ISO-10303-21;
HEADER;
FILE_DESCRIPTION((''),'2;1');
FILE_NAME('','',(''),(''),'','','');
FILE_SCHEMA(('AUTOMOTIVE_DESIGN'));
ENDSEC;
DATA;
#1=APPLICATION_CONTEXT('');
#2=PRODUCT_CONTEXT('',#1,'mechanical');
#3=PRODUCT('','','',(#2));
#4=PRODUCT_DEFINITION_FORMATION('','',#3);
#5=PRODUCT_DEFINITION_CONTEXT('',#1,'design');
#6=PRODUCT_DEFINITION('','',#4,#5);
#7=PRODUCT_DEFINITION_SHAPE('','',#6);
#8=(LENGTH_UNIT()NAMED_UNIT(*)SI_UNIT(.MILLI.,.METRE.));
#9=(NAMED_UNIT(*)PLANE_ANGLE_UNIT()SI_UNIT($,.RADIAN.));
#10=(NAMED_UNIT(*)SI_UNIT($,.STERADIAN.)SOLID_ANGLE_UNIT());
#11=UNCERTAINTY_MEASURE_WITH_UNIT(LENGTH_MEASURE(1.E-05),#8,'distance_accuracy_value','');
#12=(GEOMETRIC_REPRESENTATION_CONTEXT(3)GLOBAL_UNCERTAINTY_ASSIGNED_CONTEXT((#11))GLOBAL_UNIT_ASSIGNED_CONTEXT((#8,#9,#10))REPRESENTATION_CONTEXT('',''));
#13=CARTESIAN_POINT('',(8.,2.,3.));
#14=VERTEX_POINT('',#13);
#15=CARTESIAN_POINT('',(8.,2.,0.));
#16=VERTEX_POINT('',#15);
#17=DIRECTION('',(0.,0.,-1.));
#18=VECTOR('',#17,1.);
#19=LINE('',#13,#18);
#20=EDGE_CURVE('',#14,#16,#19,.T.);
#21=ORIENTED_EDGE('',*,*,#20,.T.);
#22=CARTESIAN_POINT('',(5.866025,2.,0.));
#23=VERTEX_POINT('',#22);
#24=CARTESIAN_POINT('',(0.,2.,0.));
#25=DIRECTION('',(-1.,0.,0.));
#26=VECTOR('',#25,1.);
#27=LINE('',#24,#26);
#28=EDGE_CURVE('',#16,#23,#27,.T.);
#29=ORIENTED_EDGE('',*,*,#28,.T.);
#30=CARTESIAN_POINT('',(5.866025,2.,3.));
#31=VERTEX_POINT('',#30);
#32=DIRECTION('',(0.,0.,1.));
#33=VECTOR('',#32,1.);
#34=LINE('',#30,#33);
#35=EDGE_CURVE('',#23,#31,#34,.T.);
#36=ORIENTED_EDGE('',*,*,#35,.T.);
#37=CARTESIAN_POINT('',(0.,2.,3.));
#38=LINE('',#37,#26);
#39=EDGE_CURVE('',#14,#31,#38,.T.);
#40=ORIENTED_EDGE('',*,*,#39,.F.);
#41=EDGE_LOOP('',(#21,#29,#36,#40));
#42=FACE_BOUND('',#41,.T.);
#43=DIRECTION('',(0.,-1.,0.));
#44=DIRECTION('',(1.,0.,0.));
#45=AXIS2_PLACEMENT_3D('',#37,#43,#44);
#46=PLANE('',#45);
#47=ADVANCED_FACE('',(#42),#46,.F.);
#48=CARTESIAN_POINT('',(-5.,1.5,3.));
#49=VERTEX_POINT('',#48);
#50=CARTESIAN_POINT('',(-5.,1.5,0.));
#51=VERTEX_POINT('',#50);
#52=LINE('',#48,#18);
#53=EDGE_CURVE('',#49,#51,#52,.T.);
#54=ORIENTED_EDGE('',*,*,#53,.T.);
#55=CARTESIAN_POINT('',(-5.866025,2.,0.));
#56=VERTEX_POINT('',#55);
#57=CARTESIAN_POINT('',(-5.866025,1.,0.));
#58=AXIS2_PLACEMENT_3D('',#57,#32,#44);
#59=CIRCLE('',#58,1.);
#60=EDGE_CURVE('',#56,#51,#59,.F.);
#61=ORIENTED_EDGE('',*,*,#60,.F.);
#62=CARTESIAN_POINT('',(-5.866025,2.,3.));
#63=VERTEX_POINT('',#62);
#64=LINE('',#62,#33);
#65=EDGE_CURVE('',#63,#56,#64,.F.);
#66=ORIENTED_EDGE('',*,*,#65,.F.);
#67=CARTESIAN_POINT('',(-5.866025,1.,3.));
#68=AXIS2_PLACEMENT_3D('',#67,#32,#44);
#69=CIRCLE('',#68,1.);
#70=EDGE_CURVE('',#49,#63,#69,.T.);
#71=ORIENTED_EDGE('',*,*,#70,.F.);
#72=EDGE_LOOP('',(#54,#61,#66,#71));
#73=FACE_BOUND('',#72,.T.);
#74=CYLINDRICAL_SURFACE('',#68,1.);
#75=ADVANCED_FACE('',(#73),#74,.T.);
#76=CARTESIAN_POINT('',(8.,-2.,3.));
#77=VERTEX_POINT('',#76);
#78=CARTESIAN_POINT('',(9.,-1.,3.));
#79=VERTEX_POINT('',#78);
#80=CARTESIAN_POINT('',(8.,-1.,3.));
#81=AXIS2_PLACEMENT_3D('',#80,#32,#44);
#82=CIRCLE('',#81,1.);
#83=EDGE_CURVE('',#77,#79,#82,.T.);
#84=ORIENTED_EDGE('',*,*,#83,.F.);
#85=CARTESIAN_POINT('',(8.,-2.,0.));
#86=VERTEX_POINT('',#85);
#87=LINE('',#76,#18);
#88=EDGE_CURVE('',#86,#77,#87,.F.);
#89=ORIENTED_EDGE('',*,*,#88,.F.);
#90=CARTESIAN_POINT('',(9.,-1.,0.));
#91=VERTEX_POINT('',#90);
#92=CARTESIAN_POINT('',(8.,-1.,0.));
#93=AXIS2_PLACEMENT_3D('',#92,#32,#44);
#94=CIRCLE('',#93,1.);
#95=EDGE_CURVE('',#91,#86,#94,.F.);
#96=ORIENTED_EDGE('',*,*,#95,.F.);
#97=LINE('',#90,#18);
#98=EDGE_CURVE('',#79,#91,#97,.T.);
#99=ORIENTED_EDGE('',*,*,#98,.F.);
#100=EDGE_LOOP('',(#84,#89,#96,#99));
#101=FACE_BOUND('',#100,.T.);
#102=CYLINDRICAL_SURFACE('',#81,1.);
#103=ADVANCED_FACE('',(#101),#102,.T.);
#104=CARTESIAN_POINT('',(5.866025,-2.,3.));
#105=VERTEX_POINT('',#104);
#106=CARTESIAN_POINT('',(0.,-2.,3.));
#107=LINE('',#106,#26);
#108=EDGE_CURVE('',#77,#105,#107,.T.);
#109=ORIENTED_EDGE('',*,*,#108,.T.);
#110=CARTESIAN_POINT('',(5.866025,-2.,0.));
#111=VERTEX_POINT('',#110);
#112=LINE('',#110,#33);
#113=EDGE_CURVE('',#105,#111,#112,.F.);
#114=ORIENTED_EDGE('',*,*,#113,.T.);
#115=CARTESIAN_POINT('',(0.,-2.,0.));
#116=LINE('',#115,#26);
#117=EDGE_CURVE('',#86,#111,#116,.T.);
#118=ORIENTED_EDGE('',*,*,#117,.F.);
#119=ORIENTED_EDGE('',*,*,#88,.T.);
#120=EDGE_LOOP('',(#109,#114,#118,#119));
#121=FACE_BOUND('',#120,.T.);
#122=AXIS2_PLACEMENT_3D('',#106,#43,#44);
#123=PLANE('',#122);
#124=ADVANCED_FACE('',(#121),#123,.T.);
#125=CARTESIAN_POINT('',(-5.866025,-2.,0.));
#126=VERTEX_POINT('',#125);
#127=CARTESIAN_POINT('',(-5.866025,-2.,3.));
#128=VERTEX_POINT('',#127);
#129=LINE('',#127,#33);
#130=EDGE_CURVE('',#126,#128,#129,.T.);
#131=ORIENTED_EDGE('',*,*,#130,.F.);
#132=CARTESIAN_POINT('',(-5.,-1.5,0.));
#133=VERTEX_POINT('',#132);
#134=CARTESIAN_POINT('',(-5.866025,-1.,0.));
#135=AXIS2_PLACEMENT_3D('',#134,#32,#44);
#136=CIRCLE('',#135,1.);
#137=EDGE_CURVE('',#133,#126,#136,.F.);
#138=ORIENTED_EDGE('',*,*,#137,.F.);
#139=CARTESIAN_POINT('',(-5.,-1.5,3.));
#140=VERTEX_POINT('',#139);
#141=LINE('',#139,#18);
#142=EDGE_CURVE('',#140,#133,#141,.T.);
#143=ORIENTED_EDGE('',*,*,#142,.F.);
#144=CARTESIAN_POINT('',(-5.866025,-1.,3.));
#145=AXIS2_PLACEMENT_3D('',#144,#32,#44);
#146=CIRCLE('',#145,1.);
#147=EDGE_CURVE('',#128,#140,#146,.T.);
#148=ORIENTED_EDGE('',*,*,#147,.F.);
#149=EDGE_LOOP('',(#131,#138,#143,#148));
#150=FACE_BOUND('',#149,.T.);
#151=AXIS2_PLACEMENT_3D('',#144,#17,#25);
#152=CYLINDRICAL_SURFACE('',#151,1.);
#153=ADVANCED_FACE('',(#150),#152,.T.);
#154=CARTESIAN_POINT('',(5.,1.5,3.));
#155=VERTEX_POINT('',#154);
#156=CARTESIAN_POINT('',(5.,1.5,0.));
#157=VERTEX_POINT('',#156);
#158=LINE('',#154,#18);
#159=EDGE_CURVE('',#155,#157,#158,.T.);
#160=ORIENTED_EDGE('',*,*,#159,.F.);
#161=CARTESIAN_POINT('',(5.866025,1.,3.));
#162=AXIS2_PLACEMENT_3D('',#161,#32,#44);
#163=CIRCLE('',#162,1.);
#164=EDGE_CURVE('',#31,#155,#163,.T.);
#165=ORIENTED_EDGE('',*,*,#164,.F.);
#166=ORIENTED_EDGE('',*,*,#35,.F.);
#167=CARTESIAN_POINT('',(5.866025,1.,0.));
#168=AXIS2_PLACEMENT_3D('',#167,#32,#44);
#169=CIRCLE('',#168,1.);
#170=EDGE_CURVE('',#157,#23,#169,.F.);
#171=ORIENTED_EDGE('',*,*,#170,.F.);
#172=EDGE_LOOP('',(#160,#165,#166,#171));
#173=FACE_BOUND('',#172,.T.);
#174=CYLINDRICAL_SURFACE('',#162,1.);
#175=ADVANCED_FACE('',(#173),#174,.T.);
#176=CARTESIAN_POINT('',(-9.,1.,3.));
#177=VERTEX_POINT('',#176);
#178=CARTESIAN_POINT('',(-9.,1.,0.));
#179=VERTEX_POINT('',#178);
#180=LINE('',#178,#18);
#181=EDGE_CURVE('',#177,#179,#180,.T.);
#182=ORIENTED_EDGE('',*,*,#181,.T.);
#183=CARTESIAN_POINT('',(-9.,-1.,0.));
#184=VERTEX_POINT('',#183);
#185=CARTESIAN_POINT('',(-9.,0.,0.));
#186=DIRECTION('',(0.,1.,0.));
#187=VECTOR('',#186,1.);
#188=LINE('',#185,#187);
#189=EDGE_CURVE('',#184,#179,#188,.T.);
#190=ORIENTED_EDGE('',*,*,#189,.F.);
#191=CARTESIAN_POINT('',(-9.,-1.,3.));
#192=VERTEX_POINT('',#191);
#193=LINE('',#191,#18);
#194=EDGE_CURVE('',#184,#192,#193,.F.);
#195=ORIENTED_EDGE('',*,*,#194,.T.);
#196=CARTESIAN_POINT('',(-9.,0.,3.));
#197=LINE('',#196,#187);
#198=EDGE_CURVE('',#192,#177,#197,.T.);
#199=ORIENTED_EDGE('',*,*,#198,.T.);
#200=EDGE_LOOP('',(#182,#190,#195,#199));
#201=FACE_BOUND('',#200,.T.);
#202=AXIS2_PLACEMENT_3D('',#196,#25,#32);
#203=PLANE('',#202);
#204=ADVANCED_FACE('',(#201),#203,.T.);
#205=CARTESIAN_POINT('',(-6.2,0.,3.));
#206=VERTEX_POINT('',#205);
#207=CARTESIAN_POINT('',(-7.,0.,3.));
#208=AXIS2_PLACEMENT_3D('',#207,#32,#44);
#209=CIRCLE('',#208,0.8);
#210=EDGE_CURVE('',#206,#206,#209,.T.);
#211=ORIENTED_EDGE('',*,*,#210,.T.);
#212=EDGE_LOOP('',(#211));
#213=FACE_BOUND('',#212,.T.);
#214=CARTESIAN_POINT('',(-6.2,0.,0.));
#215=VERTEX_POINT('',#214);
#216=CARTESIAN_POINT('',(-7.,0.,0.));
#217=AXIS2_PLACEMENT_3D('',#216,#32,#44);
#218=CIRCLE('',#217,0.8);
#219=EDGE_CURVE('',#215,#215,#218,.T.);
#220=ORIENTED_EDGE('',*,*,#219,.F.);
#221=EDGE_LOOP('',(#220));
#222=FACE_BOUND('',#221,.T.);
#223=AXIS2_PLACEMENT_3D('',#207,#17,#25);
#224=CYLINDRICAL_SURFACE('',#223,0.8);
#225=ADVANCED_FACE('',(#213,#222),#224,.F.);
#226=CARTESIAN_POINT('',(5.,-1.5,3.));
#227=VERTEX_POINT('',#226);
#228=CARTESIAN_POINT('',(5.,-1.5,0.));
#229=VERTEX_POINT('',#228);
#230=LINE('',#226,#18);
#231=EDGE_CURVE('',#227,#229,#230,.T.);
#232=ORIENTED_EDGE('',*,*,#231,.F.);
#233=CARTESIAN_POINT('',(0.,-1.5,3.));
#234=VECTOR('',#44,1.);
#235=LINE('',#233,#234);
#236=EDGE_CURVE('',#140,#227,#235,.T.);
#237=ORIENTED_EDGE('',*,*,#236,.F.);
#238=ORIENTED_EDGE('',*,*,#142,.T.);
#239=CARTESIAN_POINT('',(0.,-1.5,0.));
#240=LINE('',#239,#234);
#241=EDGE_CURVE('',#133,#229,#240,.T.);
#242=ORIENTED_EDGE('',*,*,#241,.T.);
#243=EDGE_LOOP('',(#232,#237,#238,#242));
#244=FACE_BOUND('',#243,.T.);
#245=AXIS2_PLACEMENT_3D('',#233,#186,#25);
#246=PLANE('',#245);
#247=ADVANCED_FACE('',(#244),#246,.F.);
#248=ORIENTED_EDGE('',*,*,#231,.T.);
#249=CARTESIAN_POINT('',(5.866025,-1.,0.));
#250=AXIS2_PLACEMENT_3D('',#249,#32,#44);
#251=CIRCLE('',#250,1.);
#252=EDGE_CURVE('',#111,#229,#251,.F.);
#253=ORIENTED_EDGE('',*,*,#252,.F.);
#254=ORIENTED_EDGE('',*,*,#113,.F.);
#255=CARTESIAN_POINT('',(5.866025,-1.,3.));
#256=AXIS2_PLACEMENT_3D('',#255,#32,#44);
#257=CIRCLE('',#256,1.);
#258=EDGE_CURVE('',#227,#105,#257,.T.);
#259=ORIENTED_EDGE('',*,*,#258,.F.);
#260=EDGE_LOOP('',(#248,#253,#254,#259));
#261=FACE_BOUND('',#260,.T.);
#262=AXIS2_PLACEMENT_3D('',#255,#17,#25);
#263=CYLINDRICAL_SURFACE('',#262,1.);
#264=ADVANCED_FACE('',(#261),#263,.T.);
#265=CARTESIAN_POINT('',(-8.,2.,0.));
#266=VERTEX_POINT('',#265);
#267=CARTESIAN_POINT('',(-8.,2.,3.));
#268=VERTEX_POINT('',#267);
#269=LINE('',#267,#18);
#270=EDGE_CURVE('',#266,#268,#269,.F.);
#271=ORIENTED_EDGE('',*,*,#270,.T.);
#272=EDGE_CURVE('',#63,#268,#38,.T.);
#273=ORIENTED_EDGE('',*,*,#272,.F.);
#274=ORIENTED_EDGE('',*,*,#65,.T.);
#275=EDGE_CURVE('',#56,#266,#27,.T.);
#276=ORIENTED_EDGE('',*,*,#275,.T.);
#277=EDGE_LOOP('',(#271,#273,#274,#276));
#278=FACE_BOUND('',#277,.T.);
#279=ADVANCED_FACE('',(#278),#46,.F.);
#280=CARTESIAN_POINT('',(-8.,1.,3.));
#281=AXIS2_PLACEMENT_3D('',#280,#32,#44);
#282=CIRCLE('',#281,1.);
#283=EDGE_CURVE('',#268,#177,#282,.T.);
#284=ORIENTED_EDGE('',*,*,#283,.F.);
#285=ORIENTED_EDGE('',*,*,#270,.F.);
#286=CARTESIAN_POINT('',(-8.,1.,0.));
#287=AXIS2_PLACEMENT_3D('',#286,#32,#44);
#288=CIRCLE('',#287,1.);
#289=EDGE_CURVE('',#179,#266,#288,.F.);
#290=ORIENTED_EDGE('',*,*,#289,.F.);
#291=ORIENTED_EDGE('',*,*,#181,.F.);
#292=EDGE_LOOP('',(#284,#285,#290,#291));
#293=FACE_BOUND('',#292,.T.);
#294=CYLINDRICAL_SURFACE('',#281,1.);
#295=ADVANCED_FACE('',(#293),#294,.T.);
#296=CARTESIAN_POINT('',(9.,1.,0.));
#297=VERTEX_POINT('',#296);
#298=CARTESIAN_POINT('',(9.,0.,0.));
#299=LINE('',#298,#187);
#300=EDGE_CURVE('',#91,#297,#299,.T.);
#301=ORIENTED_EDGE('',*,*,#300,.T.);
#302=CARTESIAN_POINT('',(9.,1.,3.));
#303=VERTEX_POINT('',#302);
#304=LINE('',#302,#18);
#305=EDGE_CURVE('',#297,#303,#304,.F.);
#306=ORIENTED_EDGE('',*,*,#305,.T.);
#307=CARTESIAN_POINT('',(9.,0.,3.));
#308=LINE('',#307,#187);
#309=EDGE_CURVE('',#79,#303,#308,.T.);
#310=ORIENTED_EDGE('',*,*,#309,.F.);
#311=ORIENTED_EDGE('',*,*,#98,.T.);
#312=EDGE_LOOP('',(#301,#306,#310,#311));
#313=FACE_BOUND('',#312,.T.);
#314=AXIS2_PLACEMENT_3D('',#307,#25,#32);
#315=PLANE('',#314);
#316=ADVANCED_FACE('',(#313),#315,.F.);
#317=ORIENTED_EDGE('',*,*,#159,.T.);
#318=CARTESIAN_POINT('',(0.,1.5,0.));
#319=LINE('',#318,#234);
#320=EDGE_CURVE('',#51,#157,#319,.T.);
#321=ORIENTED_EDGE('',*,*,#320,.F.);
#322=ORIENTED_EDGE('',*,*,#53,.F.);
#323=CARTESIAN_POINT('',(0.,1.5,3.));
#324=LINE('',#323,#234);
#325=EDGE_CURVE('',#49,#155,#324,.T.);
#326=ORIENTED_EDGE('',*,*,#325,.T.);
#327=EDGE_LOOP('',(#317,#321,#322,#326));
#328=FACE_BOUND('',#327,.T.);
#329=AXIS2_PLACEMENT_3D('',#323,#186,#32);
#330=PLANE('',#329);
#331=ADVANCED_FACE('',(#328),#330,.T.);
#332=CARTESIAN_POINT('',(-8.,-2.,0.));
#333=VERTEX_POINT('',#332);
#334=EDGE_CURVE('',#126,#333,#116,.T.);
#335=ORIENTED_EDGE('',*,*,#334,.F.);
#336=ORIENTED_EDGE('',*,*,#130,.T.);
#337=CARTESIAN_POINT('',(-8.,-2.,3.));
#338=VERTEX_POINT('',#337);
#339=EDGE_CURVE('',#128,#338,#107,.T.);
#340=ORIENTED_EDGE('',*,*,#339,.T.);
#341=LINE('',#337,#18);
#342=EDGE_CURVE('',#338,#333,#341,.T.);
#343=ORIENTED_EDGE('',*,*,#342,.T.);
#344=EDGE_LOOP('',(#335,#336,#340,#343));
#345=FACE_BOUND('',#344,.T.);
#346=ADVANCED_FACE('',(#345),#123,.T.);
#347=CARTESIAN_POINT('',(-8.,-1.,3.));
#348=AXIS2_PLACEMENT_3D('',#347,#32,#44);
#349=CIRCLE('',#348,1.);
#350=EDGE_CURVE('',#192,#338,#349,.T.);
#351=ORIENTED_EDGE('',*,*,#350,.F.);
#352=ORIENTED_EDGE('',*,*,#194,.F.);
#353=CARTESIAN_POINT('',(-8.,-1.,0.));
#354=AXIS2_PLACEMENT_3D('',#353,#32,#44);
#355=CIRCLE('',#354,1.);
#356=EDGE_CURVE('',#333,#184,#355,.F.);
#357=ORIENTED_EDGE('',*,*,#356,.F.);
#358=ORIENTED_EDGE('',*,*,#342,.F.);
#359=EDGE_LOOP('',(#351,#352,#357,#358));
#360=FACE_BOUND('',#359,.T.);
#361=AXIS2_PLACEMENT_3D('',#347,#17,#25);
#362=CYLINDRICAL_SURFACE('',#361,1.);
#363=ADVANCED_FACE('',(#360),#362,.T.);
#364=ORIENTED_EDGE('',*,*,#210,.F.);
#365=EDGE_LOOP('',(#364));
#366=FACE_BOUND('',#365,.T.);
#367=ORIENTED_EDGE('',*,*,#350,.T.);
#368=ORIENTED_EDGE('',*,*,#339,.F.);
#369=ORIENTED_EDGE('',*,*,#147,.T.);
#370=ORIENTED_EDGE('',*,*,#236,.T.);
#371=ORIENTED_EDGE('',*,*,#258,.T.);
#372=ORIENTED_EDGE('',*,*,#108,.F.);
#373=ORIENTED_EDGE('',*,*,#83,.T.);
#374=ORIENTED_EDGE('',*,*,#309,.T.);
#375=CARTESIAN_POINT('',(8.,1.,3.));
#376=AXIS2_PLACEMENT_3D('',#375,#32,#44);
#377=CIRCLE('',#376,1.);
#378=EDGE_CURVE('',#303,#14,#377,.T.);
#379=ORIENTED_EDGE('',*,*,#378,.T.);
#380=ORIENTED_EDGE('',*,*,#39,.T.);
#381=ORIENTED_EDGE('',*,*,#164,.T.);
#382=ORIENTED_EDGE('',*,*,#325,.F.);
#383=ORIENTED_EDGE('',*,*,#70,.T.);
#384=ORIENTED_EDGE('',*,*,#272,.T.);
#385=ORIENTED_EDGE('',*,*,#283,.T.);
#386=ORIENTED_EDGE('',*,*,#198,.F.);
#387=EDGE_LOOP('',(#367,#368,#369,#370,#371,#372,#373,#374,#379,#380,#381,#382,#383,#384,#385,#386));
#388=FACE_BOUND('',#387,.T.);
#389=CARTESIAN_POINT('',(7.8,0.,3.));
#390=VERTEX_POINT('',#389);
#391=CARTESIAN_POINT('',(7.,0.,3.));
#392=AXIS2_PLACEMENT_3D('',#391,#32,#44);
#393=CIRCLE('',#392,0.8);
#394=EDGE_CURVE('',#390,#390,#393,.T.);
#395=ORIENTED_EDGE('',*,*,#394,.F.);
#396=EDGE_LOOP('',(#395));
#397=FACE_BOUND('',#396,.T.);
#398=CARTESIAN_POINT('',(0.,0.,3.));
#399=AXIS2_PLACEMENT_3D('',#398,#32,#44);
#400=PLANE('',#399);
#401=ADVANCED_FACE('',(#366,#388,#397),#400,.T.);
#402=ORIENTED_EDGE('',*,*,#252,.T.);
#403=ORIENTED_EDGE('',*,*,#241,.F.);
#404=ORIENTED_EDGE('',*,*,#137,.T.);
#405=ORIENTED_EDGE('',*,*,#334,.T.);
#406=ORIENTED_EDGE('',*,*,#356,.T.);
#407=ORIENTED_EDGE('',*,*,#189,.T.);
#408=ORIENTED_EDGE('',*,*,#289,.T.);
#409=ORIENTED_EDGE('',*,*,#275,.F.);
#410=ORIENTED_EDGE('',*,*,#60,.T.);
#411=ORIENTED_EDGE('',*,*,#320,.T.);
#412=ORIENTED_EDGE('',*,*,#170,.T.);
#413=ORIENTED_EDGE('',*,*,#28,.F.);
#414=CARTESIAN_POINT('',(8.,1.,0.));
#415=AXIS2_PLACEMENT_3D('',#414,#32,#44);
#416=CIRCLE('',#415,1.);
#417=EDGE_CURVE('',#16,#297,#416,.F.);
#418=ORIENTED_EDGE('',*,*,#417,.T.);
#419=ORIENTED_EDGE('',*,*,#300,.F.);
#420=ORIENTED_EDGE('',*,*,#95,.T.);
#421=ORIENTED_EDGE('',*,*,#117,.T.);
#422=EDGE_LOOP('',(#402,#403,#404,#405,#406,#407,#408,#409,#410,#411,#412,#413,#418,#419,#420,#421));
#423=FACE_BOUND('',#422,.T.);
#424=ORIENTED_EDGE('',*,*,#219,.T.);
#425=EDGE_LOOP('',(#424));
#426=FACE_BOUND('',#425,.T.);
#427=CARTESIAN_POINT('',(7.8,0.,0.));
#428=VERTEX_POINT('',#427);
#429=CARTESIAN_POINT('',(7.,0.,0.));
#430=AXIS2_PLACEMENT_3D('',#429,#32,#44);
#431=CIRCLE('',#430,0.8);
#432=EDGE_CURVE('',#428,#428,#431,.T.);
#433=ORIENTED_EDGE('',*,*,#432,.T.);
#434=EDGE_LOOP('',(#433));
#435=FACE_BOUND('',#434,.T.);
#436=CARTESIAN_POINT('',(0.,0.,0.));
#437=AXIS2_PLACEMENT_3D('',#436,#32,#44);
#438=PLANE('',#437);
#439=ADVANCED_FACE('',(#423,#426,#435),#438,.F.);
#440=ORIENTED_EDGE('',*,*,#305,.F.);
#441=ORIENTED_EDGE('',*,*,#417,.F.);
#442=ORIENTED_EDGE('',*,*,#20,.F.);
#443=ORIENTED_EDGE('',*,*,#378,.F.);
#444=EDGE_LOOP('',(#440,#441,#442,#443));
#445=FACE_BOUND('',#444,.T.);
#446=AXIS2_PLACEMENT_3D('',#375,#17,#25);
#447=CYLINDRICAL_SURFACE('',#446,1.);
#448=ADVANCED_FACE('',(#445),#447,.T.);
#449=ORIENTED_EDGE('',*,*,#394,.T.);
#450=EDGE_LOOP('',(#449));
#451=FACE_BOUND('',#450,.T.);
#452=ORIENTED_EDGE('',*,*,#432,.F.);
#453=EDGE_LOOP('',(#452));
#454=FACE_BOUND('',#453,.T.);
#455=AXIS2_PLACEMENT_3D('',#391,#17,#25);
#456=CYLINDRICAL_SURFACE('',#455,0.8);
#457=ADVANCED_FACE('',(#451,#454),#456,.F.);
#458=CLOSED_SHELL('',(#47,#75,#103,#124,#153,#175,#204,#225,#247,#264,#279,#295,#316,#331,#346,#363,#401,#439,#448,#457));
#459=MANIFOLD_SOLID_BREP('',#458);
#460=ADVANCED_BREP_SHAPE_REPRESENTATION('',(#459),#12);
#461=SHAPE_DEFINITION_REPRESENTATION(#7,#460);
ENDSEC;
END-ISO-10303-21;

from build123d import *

# Parameters (mm, degrees)
SKETCH1_R           = 0.8
BOSS_EXTRUDE1_DEPTH = 3
FILLET1_R           = 1


with BuildPart() as part:
    # Sketch1 → Boss-Extrude1 (new body)
    with BuildSketch(Plane.XY):
        Polygon((5, -2), (9, -2), (9, 2), (5, 2), (5, 1.5), (-5, 1.5), (-5, 2), (-9, 2), (-9, -2), (-5, -2), (-5, -1.5), (5, -1.5), align=None)
        with Locations((-7, 0)):
            Circle(SKETCH1_R, mode=Mode.SUBTRACT)
        with Locations((7, 0)):
            Circle(SKETCH1_R, mode=Mode.SUBTRACT)
    extrude(amount=BOSS_EXTRUDE1_DEPTH)

    # Fillet1
    # the kernel refuses this fillet: 1 mm, written as the material it takes off along each edge
    with BuildSketch(Plane(origin=(5, -2, -2.165063509), x_dir=(1, 0, 0), z_dir=(0, 0, 1))) as fillet1_piece_1:
        with BuildLine():
            CenterArc((0.866025404, 1), FILLET1_R, 210, 60)
            Line((0, 0.5), (-0.017320508, 0.49))
            ThreePointArc((-0.017320508, 0.49), (-0.02, 0.25), (-0.02, 0))
            Line((-0.02, 0), (0, -0.02))
            Line((0, -0.02), (0.866025404, -0.02))
            Line((0.866025404, -0.02), (0.866025404, 0))
        make_face()
    extrude(amount=7.330127019, mode=Mode.SUBTRACT)
    with BuildSketch(Plane(origin=(9, -2, -2.5), x_dir=(-1, 0, 0), z_dir=(0, 0, 1)), Plane(origin=(9, 2, -2.5), x_dir=(0, -1, 0), z_dir=(0, 0, 1)), Plane(origin=(-9, -2, -2.5), x_dir=(0, 1, 0), z_dir=(0, 0, 1)), Plane(origin=(-9, 2, -2.5), x_dir=(1, 0, 0), z_dir=(0, 0, 1))) as fillet1_piece_2:
        with BuildLine():
            CenterArc((FILLET1_R, -FILLET1_R), FILLET1_R, 90, 90)
            Line((0, -FILLET1_R), (-FILLET1_R * 0.02, -FILLET1_R))
            Line((-FILLET1_R * 0.02, -FILLET1_R), (-FILLET1_R * 0.02, FILLET1_R * 0.02))
            Line((-FILLET1_R * 0.02, FILLET1_R * 0.02), (FILLET1_R, FILLET1_R * 0.02))
            Line((FILLET1_R, FILLET1_R * 0.02), (FILLET1_R, 0))
        make_face()
    extrude(amount=8, mode=Mode.SUBTRACT)
    with BuildSketch(Plane(origin=(5, 2, -2.165063509), x_dir=(1, 0, 0), z_dir=(0, 0, 1)), Plane(origin=(-5, -2, -2.165063509), x_dir=(-1, 0, 0), z_dir=(0, 0, 1))) as fillet1_piece_3:
        with BuildLine():
            CenterArc((0.866025404, -1), FILLET1_R, 90, 60)
            Line((0, -0.5), (-0.017320508, -0.49))
            ThreePointArc((-0.017320508, -0.49), (-0.02, -0.25), (-0.02, 0))
            Line((-0.02, 0), (0, 0.02))
            Line((0, 0.02), (0.866025404, 0.02))
            Line((0.866025404, 0.02), (0.866025404, 0))
        make_face()
    extrude(amount=7.330127019, mode=Mode.SUBTRACT)
    with BuildSketch(Plane(origin=(-5, 2, -2.165063509), x_dir=(0, -1, 0), z_dir=(0, 0, 1))) as fillet1_piece_4:
        with BuildLine():
            CenterArc((1, -0.866025404), FILLET1_R, 120, 60)
            Line((0, -0.866025404), (-0.02, -0.866025404))
            Line((-0.02, -0.866025404), (-0.02, 0))
            Line((-0.02, 0), (0, 0.02))
            ThreePointArc((0, 0.02), (0.25, 0.02), (0.49, 0.017320508))
            Line((0.49, 0.017320508), (0.5, 0))
        make_face()
    extrude(amount=7.330127019, mode=Mode.SUBTRACT)


solid = part.part
